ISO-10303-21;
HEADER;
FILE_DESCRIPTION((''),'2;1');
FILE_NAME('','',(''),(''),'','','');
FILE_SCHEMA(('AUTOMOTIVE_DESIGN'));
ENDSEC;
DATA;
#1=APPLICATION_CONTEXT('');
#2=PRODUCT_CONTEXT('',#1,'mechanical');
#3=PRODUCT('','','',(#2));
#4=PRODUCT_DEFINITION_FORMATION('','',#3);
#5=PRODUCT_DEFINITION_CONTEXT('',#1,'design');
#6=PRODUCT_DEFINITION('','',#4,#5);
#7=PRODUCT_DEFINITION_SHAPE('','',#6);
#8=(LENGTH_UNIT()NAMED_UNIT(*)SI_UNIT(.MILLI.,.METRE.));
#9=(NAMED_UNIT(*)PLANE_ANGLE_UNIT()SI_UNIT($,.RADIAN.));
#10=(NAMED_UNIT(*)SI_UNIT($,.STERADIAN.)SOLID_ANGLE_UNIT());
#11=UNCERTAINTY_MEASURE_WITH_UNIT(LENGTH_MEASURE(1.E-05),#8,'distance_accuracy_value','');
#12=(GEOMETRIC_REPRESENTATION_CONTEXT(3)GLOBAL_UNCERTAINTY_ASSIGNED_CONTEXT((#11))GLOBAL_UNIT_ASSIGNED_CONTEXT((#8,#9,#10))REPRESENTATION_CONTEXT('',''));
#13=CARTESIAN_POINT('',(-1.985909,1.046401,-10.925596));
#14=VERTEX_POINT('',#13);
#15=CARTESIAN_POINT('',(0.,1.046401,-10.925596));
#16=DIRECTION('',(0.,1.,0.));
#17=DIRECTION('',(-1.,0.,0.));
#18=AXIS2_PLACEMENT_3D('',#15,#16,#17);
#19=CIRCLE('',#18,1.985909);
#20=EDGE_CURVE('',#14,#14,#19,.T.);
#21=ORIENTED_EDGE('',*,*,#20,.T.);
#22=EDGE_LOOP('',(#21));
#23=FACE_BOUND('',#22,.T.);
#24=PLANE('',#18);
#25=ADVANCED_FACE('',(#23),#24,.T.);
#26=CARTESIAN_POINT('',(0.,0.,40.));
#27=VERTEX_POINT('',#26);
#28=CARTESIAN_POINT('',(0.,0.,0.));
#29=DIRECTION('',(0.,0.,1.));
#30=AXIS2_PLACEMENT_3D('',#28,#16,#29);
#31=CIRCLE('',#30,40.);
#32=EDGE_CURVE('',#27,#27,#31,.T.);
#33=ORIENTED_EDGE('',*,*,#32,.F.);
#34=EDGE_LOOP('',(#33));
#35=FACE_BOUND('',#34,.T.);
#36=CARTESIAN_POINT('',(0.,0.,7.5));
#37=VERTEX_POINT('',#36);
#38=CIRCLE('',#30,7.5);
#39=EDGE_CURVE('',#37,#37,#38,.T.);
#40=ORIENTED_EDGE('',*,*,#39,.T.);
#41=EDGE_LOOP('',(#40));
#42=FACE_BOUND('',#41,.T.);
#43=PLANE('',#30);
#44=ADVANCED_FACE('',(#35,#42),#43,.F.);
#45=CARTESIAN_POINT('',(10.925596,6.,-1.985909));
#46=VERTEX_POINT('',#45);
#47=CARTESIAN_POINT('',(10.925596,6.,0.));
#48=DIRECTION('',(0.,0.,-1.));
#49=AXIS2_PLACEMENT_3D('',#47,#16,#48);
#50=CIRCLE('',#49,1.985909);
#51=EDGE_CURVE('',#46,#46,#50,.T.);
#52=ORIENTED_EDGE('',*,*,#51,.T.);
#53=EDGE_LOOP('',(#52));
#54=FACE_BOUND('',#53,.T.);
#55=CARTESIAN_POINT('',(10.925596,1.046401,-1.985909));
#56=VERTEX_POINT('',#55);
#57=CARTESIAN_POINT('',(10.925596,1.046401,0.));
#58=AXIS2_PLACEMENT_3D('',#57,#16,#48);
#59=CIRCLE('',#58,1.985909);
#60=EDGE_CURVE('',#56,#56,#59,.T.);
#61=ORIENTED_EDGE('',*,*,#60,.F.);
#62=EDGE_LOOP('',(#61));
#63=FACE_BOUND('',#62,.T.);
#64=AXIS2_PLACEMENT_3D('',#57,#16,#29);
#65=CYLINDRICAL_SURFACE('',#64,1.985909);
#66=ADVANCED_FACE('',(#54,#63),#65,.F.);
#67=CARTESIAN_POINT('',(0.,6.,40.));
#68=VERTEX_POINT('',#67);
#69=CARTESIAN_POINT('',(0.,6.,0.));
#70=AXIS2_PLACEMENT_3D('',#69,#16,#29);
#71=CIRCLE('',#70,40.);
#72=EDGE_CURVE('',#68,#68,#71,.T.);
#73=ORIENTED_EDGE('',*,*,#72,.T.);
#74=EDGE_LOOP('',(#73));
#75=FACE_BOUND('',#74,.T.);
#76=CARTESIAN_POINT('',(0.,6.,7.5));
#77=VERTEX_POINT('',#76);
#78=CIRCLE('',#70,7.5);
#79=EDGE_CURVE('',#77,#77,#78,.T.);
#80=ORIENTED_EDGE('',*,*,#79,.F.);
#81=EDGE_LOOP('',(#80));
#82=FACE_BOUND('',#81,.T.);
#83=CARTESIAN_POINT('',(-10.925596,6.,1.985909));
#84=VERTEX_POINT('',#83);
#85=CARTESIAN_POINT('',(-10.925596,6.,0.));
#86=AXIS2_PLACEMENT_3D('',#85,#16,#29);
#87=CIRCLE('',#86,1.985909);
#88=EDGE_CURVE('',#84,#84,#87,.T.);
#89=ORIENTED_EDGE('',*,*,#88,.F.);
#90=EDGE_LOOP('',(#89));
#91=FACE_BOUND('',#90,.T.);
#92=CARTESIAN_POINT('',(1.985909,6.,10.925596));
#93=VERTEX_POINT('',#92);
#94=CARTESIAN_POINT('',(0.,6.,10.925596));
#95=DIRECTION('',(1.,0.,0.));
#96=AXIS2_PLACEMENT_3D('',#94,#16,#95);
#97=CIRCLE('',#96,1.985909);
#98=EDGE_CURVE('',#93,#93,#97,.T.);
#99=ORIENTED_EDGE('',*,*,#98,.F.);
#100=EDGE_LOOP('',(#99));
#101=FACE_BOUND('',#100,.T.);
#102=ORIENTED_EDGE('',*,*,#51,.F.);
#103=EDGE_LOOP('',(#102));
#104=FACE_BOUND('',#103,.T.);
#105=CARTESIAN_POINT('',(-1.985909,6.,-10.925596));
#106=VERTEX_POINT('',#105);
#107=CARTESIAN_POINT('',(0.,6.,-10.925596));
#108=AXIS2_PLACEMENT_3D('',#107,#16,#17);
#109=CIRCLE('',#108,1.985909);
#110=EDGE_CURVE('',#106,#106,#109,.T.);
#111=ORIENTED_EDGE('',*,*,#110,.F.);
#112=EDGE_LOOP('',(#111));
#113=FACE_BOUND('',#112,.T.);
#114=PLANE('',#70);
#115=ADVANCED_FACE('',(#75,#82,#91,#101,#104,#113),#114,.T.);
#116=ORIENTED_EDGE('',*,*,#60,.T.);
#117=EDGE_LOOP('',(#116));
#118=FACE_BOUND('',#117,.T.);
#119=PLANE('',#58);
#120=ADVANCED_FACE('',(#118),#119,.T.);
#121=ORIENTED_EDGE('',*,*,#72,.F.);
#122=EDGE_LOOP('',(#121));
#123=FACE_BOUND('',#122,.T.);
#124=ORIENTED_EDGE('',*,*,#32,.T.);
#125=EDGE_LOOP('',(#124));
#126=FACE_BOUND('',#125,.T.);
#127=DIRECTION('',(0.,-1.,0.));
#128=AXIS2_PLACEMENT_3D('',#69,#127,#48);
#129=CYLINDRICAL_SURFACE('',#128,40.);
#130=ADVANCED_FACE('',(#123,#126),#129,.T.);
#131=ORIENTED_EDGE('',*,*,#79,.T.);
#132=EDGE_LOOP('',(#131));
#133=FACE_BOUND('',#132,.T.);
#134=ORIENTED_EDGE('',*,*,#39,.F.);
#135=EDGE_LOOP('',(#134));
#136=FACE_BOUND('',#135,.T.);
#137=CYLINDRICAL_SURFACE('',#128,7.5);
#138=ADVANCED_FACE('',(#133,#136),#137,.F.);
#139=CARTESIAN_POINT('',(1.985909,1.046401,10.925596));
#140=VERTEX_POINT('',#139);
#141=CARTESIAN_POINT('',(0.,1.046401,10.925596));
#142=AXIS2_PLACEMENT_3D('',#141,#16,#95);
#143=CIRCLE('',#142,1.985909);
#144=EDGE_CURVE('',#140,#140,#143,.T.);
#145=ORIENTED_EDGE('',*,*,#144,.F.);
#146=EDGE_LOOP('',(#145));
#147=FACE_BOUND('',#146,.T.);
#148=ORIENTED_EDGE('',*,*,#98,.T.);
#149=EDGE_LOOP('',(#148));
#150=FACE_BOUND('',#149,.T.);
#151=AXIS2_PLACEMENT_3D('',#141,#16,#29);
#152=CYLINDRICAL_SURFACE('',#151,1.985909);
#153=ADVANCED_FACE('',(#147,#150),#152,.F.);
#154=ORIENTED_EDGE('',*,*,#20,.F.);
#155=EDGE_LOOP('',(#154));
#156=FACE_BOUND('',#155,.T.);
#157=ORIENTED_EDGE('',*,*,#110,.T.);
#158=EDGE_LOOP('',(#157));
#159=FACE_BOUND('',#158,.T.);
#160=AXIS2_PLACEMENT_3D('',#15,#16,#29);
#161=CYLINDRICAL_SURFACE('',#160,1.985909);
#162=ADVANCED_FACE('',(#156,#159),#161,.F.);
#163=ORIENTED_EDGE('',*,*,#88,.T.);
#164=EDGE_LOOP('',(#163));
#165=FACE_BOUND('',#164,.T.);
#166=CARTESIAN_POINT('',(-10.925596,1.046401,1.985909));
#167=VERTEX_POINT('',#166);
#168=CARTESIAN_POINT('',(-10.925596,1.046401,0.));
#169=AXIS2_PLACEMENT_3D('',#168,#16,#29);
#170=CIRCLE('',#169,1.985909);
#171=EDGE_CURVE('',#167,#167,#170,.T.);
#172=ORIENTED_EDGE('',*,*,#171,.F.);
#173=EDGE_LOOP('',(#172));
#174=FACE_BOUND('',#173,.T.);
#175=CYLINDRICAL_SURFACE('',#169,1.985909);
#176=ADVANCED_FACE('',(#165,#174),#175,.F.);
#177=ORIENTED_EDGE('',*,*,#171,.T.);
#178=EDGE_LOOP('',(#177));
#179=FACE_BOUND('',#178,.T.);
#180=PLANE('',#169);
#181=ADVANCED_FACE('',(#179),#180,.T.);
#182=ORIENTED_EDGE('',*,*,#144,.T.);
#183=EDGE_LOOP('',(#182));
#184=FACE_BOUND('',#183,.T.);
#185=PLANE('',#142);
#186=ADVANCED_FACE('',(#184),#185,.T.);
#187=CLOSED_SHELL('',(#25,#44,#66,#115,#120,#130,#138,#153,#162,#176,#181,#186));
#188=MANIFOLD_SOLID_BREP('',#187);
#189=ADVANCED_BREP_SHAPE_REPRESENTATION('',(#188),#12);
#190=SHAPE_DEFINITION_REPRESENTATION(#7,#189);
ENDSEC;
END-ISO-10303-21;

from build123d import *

# Parameters (mm, degrees)
SKETCH1_R           = 40
BOSS_EXTRUDE1_DEPTH = 6
SKETCH2_R           = 7.5
CUT_EXTRUDE1_DEPTH  = 57.885850613
SKETCH3_R           = 1.985908738
CUT_EXTRUDE2_DEPTH  = 4.953598815
CIRPATTERN1_COUNT   = 4


with BuildPart() as part:
    # Sketch1 → Boss-Extrude1 (new body)
    with BuildSketch(Plane(origin=(0, 0, 0), x_dir=(1, 0, 0), z_dir=(0, 1, 0))):
        Circle(SKETCH1_R)
    extrude(amount=BOSS_EXTRUDE1_DEPTH)

    # Sketch2 → Cut-Extrude1 (cut, through all)
    with BuildSketch(Plane(origin=(0, 0, 0), x_dir=(1, 0, 0), z_dir=(0, 1, 0))):
        Circle(SKETCH2_R)
    extrude(amount=CUT_EXTRUDE1_DEPTH, mode=Mode.SUBTRACT)

    # Sketch3 → Cut-Extrude2 (cut)
    with BuildSketch(Plane(origin=(0, 6, 0), x_dir=(1, 0, 0), z_dir=(0, 1, 0))):
        with Locations((-10.925595865, 0)):
            Circle(SKETCH3_R)
    cut_extrude2 = extrude(amount=-CUT_EXTRUDE2_DEPTH, mode=Mode.SUBTRACT)

    # CirPattern1: Cut-Extrude2 ×4 about axis
    cirpattern1_axis = Axis((0, 0, 0), (0, 1, 0))
    for i in range(1, CIRPATTERN1_COUNT):
        add(cut_extrude2.rotate(cirpattern1_axis, i * 360 / CIRPATTERN1_COUNT), mode=Mode.SUBTRACT)


solid = part.part
